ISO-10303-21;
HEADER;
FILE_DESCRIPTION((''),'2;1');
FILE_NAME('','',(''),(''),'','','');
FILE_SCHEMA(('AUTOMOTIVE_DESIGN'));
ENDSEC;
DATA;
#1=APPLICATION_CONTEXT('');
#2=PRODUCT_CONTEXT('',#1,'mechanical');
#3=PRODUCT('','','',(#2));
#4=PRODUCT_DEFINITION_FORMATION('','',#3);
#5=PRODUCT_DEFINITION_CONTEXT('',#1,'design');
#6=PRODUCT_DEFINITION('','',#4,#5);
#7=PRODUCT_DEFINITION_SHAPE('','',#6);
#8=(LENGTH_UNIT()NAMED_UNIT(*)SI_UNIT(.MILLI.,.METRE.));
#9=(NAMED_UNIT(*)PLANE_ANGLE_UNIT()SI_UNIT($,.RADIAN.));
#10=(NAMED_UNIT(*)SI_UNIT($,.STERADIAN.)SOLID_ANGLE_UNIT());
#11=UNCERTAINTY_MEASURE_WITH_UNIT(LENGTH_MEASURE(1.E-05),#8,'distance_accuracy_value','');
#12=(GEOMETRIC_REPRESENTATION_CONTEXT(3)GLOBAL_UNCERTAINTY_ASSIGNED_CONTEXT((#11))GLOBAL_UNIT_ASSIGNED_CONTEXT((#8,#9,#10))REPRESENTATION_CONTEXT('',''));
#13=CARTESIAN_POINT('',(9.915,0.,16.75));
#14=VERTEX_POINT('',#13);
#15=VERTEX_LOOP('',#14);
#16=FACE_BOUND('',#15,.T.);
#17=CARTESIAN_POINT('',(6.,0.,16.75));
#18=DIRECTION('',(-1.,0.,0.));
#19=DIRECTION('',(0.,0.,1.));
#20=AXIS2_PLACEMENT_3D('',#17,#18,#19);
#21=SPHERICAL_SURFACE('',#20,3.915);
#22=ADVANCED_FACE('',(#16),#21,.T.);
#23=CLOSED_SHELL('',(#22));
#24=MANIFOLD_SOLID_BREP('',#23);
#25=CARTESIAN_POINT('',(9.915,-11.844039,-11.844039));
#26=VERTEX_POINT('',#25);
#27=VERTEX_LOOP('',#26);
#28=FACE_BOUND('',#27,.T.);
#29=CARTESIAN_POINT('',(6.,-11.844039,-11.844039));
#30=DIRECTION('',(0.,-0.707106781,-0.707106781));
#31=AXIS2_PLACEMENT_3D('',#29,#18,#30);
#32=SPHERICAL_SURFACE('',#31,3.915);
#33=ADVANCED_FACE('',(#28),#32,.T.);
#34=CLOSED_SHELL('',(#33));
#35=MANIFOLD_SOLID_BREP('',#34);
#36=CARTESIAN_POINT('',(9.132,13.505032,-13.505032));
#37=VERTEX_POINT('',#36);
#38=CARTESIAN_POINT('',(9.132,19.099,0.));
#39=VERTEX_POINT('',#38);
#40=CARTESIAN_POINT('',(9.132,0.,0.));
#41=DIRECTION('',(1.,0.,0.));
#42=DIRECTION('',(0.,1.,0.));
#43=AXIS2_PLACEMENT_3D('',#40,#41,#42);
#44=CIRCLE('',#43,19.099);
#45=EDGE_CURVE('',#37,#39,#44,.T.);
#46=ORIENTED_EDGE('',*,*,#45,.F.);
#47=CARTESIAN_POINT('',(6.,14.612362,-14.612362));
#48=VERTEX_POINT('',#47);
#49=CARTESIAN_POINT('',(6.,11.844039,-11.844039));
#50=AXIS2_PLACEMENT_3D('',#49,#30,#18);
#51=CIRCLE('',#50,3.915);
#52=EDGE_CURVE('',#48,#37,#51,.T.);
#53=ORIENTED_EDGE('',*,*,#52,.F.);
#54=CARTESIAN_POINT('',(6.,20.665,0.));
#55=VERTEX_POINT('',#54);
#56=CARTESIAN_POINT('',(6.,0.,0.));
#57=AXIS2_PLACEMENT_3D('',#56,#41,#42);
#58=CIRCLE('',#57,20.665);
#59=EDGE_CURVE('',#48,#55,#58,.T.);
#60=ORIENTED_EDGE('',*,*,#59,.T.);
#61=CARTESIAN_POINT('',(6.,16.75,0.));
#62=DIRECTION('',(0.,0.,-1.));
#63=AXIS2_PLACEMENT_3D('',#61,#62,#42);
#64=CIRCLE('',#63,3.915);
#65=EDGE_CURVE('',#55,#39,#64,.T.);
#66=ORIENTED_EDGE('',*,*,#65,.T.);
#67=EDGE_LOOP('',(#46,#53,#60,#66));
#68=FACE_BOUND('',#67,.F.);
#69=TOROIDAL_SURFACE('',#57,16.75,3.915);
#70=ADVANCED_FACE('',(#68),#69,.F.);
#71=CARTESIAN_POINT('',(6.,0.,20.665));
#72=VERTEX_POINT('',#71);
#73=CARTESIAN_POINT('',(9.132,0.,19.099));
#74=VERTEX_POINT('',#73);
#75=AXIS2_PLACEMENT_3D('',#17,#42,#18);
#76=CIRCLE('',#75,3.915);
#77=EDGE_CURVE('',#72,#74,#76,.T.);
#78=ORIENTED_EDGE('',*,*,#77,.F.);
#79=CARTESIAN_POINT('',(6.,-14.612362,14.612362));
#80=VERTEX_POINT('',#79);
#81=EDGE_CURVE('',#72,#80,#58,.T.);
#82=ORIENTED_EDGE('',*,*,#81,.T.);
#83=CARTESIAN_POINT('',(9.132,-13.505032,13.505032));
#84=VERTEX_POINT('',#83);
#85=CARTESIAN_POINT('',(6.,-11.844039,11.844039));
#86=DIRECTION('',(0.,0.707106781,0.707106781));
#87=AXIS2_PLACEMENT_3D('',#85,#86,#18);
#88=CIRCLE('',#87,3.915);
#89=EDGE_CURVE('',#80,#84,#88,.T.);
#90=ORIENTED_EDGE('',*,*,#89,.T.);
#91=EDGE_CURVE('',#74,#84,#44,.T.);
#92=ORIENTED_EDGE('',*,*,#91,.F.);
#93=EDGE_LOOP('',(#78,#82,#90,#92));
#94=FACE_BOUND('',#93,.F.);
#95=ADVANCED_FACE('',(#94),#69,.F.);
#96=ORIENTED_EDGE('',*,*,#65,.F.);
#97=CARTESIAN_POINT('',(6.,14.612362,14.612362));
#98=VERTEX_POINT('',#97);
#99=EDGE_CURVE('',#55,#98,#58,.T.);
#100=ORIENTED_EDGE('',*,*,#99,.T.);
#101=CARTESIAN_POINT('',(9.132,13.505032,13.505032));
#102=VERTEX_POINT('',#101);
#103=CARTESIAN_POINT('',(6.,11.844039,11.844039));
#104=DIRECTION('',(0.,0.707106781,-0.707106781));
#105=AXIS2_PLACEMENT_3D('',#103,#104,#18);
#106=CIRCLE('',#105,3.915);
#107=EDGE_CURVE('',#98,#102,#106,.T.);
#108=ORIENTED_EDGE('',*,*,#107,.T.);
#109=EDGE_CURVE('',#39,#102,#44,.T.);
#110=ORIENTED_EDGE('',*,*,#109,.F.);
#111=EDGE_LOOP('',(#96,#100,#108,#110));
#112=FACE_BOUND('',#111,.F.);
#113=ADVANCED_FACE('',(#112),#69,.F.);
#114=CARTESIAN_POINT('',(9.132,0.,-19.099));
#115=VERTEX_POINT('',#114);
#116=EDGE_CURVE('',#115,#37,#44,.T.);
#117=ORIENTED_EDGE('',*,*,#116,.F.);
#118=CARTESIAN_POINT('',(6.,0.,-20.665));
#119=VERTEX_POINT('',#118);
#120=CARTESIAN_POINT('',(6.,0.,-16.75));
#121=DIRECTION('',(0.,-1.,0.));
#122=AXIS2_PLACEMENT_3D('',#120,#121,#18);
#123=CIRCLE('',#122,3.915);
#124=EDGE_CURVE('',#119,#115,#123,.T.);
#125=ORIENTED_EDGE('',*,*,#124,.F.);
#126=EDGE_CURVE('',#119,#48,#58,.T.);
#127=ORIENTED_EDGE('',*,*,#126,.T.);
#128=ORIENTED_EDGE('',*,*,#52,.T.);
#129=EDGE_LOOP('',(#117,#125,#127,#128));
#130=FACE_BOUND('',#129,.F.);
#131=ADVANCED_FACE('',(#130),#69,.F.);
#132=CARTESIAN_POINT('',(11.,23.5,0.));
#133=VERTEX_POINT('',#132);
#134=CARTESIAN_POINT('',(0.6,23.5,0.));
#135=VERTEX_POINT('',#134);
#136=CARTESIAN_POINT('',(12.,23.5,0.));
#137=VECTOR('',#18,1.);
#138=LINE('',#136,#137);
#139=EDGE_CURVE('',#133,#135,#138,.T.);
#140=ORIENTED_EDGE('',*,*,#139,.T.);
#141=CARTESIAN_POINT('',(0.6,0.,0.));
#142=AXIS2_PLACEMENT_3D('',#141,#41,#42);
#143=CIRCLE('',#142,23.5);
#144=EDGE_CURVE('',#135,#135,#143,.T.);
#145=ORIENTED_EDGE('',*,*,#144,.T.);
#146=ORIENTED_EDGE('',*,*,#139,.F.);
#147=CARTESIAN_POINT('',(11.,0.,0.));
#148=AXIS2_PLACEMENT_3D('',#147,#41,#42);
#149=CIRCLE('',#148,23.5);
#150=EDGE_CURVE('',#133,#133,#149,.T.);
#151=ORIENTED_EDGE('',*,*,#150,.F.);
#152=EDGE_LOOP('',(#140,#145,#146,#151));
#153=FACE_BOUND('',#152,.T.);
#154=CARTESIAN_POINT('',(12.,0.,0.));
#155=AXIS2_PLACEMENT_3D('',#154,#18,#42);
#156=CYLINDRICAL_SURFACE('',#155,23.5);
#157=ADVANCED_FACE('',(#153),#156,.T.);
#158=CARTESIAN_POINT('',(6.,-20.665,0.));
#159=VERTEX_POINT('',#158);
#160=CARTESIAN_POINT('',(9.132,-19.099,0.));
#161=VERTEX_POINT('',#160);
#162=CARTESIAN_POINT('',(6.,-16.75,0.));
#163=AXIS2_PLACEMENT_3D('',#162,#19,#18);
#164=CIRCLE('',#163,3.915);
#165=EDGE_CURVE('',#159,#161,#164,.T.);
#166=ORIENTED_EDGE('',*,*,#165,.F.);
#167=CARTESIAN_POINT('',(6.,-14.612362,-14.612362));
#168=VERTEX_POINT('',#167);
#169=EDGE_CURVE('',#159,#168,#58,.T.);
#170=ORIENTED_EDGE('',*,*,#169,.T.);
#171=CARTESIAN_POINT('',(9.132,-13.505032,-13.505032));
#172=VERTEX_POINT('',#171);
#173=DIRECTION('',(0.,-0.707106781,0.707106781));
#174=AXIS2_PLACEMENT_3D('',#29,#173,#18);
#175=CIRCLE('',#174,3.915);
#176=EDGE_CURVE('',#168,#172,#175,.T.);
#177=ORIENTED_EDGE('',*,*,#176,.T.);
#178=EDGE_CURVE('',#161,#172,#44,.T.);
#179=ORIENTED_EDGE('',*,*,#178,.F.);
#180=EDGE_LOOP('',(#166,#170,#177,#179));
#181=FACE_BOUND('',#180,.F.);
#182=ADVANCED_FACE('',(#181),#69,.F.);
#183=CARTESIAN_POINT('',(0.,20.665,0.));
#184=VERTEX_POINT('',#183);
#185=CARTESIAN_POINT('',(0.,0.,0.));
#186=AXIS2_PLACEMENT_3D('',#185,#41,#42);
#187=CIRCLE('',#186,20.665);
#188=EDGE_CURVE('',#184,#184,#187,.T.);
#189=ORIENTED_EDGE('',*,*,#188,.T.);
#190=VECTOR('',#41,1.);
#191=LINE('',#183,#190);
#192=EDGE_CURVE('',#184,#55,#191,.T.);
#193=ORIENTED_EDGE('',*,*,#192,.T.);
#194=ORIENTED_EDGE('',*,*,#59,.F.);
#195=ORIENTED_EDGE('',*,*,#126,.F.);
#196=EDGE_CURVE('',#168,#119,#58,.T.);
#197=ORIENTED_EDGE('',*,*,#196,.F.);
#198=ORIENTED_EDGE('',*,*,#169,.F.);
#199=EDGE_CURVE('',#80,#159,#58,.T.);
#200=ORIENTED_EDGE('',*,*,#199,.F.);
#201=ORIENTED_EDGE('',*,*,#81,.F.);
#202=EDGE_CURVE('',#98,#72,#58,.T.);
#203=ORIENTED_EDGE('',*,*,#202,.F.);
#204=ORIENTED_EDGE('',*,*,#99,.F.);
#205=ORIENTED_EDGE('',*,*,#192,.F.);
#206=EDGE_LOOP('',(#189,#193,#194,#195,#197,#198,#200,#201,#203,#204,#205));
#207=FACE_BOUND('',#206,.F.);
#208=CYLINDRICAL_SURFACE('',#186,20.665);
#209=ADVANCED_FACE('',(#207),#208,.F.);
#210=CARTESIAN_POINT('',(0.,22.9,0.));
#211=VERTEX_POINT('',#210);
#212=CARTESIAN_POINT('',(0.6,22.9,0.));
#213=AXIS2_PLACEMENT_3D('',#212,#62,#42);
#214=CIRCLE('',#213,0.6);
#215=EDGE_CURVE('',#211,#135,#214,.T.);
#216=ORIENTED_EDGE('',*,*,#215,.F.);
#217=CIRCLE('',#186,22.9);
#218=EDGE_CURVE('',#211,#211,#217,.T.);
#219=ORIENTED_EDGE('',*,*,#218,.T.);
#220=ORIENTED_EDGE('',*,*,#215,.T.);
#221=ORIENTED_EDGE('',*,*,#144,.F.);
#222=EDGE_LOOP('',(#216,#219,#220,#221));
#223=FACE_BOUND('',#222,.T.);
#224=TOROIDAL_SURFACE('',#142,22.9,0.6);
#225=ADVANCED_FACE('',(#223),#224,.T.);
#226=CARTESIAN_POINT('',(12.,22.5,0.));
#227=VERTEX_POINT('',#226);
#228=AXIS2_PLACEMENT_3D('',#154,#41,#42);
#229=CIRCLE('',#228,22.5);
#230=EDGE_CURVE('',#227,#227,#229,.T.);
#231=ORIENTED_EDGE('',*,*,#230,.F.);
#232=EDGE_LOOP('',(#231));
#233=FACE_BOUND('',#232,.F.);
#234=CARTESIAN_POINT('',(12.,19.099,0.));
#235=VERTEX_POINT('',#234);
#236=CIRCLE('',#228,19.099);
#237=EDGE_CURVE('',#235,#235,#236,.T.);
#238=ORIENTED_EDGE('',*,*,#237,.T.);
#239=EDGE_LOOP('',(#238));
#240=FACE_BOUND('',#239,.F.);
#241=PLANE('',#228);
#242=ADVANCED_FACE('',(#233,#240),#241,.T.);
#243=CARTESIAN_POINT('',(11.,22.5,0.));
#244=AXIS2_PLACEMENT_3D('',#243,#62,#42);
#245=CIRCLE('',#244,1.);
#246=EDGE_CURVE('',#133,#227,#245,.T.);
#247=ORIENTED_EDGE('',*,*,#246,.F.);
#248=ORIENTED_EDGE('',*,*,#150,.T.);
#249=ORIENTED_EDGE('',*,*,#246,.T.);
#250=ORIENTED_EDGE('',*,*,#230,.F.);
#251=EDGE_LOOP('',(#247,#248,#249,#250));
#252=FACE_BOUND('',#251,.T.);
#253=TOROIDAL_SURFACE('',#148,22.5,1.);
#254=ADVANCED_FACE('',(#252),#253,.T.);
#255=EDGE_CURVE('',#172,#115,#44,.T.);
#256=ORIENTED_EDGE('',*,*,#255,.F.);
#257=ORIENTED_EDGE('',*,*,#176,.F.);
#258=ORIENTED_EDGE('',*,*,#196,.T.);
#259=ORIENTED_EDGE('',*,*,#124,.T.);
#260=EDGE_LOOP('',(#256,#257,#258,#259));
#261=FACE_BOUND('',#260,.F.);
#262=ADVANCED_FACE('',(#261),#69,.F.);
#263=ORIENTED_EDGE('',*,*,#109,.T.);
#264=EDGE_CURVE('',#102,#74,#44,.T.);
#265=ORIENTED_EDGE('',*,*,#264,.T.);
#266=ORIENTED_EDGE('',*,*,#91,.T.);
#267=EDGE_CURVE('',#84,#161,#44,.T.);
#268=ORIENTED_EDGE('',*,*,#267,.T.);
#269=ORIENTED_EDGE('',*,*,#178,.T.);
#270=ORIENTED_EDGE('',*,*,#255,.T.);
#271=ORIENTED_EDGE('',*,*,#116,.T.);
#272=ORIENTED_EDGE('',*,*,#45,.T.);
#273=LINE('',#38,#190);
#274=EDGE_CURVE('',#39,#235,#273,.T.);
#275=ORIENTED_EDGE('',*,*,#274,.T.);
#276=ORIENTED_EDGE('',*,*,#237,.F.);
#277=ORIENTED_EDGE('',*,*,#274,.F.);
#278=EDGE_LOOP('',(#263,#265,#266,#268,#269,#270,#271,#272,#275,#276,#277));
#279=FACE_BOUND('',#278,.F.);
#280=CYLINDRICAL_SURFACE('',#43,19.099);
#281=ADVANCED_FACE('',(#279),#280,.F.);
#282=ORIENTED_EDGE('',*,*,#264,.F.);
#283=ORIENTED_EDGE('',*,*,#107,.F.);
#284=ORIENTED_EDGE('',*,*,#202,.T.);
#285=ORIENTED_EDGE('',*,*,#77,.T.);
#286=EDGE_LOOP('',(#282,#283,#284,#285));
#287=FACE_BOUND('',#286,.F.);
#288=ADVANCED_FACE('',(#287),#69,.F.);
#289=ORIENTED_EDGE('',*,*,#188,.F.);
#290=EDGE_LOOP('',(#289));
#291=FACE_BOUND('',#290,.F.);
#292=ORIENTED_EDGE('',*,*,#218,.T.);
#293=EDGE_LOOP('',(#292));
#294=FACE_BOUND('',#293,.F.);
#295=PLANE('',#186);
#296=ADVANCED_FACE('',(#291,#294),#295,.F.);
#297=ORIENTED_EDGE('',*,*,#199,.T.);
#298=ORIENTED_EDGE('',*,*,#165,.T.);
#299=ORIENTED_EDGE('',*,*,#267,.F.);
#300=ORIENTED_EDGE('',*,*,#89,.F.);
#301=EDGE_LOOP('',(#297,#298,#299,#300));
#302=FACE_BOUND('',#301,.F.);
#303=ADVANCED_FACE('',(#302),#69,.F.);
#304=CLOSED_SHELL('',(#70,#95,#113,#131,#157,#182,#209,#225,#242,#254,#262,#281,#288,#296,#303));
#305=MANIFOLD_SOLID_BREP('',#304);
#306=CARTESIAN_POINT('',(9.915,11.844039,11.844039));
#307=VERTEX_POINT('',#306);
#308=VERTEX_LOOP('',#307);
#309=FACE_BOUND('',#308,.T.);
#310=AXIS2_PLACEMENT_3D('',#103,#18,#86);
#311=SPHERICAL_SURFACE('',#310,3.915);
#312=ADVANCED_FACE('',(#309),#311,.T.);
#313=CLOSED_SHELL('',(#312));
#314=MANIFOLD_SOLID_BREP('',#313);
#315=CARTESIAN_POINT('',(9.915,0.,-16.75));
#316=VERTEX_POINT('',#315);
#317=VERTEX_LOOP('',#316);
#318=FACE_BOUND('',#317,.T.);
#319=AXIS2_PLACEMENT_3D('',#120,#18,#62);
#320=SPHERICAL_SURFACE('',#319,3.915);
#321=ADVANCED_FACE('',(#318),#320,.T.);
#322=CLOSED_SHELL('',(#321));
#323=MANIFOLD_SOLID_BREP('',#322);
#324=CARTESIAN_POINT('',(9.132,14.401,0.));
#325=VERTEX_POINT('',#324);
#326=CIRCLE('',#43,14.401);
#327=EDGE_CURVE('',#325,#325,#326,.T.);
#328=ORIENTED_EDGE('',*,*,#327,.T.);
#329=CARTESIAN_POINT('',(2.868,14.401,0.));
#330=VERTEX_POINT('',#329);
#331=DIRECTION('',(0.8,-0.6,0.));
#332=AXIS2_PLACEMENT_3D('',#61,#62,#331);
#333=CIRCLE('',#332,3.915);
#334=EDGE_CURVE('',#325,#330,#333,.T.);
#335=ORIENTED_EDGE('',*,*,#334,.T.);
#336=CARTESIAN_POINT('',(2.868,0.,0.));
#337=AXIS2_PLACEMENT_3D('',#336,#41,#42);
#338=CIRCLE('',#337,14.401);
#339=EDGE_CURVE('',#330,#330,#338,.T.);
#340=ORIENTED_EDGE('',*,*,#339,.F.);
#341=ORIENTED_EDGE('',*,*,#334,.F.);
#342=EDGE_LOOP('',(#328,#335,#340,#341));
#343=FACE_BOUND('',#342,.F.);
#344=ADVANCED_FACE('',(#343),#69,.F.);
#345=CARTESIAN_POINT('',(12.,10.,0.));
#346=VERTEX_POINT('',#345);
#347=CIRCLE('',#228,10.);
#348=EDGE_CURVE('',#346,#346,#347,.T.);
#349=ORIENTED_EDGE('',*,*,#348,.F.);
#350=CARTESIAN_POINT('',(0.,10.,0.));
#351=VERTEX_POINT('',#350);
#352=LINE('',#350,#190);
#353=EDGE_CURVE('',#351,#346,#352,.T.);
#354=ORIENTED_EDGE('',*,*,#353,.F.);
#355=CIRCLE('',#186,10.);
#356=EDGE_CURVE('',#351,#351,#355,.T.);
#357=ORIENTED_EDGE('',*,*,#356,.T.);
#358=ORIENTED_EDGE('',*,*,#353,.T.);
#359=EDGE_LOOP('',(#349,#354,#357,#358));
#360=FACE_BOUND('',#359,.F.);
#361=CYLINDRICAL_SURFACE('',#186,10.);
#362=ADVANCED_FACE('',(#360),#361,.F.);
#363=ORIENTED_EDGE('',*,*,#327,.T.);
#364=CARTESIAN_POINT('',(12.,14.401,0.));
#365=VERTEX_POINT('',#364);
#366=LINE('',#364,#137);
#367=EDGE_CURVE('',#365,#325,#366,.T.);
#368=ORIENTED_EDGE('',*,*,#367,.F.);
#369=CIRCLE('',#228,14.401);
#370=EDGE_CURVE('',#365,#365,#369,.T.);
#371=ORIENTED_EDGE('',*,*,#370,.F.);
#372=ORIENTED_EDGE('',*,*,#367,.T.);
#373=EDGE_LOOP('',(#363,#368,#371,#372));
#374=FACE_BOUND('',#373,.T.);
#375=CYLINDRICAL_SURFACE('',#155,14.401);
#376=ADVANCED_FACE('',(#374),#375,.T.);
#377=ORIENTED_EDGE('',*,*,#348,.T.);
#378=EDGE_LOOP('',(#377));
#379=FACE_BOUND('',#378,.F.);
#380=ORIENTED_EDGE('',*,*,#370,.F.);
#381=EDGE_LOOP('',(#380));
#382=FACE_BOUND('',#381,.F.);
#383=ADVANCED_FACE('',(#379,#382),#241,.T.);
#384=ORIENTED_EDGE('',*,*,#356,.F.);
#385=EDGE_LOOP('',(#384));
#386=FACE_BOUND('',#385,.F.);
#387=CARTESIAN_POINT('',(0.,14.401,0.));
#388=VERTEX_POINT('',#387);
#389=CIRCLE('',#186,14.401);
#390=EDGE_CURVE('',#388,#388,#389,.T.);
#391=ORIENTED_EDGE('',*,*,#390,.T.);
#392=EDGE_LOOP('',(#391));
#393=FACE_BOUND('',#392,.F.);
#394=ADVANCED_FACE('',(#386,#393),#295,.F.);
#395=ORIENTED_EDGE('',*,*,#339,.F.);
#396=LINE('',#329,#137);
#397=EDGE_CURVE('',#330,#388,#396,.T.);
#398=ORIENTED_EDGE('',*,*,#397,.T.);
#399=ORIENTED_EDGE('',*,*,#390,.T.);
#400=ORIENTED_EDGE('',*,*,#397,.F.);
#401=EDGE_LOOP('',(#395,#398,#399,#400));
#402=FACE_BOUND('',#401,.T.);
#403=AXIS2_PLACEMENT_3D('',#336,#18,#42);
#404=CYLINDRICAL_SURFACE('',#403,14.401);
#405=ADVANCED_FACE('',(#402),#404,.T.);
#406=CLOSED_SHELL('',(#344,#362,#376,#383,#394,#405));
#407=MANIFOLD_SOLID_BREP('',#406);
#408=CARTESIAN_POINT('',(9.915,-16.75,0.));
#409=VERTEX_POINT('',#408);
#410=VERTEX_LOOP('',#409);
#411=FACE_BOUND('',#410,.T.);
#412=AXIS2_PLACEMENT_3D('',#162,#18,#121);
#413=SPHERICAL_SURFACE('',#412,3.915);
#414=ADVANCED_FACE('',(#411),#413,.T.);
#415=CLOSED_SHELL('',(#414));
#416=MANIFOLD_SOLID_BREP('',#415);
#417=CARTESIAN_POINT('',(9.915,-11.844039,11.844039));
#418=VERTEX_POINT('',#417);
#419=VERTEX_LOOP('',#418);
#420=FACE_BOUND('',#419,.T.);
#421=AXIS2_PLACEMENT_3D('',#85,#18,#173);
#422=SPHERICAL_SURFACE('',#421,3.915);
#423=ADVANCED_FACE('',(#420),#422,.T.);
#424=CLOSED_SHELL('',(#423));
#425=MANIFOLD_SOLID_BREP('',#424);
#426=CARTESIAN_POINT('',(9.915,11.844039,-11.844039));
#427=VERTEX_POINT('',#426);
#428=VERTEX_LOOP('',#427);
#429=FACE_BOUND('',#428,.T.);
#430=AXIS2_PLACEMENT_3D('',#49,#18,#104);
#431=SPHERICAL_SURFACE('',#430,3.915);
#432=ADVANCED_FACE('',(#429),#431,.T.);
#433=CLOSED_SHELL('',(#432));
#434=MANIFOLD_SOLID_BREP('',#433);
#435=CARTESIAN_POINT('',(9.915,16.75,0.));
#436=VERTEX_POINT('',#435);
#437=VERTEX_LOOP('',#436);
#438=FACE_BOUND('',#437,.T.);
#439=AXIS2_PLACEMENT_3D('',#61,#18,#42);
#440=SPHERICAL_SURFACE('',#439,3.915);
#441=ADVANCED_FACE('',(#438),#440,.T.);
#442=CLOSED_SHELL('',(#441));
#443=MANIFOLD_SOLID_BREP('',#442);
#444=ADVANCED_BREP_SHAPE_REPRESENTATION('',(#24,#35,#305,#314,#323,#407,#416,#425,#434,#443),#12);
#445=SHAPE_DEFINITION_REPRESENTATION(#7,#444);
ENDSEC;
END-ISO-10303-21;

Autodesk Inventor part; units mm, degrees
ref_plane "YZ Plane" through (0, 0, 0) normal (1, 0, 0) x (0, 1, 0)
ref_plane "XZ Plane" through (0, 0, 0) normal (0, 1, 0) x (-1, 0, 0)
ref_plane "XY Plane" through (0, 0, 0) normal (0, 0, 1) x (1, 0, 0)
sketch "Szkic" plane through (0, 0, 0) normal (0, 0, 1) x (1, 0, 0)
  circle A0 centre (6, 16.75) radius 3.915
  line L0 (2.085, 16.75) -> (9.915, 16.75)
  line L1 (2.868, 14.401) -> (0, 14.401)
  line L2 (9.132, 14.401) -> (12, 14.401)
  line L3 (6, 20.665) -> (0, 20.665)
  line L4 (0, 23.5) -> (12, 23.5)
  line L5 (0, 10) -> (12, 10)
  line L6 (12, 10) -> (12, 14.401)
  line L7 (9.132, 19.099) -> (12, 19.099)
  line L8 (12, 19.099) -> (12, 23.5)
  line L9 (6, 16.75) -> (6, 20.665)
  line L10 (6, 16.75) -> (6, 12.835)
  line L11 (-3.2, 0) -> (19.2, 0) projected
  line L12 (0, -2.6) -> (0, 17.35) projected
  dimension "d4" = 7.83
  dimension "d10" = 20
  dimension "d12" = 38.198
  dimension "d14" = 33.5
  dimension "d15" = 47
  dimension "d16" = 28.802
  dimension "d17" = 12
  dimension "d18" = 6
sketch "Szkic outline for Bryła" plane through (0, 0, 0) normal (0, 0, 1) x (1, 0, 0)
  line L0 (0, 20.665) -> (6, 20.665)
  line L1 (0, 23.5) -> (0, 20.665)
  line L2 (12, 23.5) -> (0, 23.5)
  line L3 (12, 19.099) -> (12, 23.5)
  line L4 (9.132, 19.099) -> (12, 19.099)
  arc A0 (6, 20.665) -> (9.132, 19.099) centre (6, 16.75) cw
  arc A1 (9.132, 14.401) -> (2.868, 14.401) centre (6, 16.75) cw
  line L5 (2.868, 14.401) -> (0, 14.401)
  line L6 (0, 14.401) -> (0, 10)
  line L7 (0, 10) -> (12, 10)
  line L8 (12, 10) -> (12, 14.401)
  line L9 (12, 14.401) -> (9.132, 14.401)
revolve "Bryła" add sketch "Szkic outline for Bryła" angle 360 about axis through (-10, 0, 0) along (1, 0, 0)
fillet "Zaokrąglenie1" radius 1 1 edges at (12, -23.5, 0)
fillet "Zaokrąglenie1" radius 0.6 1 edges at (0, -23.5, 0)
revolve "Łożysko kulkowe" add sketch "Szkic" angle 360 about axis through (2.085, 16.75, 0) along (1, 0, 0) contours L0 L9 A0 | L0 A0 L9
pattern_circular "Kulki" count 8 over 360 about axis through (-10, 0, 0) along (1, 0, 0) of "Łożysko kulkowe"
equation "\"d4\" = DDB"
equation "\"d10\" = WD"
equation "\"d12\" = KAD1"
equation "\"d14\" = DDA"
equation "\"d15\" = BD"
equation "\"d16\" = KID1"
equation "\"d17\" = KB"
equation "\"d18\" = 0.5 * KB"
equation "\"d0\" = KR1S"
equation "\"d1\" = KR3S"
equation "\"WD\" = 20"
equation "\"BD\" = 47"
equation "\"KB\" = 12"
equation "\"KR1S\" = 1"
equation "\"KR3S\" = 0.6"
equation "\"KID1\" = 28.802"
equation "\"KAD1\" = 38.198"
equation "\"DDA\" = 33.5"
equation "\"DDB\" = 7.83"
equation "\"DBB\" = 41.33"
equation "\"BR\" = 0.5 * BD"
equation "\"BBA\" = 0"
properties part number "DIN 615 - E 20 - 20 x 47 x 12" material "Stal, miękka"
